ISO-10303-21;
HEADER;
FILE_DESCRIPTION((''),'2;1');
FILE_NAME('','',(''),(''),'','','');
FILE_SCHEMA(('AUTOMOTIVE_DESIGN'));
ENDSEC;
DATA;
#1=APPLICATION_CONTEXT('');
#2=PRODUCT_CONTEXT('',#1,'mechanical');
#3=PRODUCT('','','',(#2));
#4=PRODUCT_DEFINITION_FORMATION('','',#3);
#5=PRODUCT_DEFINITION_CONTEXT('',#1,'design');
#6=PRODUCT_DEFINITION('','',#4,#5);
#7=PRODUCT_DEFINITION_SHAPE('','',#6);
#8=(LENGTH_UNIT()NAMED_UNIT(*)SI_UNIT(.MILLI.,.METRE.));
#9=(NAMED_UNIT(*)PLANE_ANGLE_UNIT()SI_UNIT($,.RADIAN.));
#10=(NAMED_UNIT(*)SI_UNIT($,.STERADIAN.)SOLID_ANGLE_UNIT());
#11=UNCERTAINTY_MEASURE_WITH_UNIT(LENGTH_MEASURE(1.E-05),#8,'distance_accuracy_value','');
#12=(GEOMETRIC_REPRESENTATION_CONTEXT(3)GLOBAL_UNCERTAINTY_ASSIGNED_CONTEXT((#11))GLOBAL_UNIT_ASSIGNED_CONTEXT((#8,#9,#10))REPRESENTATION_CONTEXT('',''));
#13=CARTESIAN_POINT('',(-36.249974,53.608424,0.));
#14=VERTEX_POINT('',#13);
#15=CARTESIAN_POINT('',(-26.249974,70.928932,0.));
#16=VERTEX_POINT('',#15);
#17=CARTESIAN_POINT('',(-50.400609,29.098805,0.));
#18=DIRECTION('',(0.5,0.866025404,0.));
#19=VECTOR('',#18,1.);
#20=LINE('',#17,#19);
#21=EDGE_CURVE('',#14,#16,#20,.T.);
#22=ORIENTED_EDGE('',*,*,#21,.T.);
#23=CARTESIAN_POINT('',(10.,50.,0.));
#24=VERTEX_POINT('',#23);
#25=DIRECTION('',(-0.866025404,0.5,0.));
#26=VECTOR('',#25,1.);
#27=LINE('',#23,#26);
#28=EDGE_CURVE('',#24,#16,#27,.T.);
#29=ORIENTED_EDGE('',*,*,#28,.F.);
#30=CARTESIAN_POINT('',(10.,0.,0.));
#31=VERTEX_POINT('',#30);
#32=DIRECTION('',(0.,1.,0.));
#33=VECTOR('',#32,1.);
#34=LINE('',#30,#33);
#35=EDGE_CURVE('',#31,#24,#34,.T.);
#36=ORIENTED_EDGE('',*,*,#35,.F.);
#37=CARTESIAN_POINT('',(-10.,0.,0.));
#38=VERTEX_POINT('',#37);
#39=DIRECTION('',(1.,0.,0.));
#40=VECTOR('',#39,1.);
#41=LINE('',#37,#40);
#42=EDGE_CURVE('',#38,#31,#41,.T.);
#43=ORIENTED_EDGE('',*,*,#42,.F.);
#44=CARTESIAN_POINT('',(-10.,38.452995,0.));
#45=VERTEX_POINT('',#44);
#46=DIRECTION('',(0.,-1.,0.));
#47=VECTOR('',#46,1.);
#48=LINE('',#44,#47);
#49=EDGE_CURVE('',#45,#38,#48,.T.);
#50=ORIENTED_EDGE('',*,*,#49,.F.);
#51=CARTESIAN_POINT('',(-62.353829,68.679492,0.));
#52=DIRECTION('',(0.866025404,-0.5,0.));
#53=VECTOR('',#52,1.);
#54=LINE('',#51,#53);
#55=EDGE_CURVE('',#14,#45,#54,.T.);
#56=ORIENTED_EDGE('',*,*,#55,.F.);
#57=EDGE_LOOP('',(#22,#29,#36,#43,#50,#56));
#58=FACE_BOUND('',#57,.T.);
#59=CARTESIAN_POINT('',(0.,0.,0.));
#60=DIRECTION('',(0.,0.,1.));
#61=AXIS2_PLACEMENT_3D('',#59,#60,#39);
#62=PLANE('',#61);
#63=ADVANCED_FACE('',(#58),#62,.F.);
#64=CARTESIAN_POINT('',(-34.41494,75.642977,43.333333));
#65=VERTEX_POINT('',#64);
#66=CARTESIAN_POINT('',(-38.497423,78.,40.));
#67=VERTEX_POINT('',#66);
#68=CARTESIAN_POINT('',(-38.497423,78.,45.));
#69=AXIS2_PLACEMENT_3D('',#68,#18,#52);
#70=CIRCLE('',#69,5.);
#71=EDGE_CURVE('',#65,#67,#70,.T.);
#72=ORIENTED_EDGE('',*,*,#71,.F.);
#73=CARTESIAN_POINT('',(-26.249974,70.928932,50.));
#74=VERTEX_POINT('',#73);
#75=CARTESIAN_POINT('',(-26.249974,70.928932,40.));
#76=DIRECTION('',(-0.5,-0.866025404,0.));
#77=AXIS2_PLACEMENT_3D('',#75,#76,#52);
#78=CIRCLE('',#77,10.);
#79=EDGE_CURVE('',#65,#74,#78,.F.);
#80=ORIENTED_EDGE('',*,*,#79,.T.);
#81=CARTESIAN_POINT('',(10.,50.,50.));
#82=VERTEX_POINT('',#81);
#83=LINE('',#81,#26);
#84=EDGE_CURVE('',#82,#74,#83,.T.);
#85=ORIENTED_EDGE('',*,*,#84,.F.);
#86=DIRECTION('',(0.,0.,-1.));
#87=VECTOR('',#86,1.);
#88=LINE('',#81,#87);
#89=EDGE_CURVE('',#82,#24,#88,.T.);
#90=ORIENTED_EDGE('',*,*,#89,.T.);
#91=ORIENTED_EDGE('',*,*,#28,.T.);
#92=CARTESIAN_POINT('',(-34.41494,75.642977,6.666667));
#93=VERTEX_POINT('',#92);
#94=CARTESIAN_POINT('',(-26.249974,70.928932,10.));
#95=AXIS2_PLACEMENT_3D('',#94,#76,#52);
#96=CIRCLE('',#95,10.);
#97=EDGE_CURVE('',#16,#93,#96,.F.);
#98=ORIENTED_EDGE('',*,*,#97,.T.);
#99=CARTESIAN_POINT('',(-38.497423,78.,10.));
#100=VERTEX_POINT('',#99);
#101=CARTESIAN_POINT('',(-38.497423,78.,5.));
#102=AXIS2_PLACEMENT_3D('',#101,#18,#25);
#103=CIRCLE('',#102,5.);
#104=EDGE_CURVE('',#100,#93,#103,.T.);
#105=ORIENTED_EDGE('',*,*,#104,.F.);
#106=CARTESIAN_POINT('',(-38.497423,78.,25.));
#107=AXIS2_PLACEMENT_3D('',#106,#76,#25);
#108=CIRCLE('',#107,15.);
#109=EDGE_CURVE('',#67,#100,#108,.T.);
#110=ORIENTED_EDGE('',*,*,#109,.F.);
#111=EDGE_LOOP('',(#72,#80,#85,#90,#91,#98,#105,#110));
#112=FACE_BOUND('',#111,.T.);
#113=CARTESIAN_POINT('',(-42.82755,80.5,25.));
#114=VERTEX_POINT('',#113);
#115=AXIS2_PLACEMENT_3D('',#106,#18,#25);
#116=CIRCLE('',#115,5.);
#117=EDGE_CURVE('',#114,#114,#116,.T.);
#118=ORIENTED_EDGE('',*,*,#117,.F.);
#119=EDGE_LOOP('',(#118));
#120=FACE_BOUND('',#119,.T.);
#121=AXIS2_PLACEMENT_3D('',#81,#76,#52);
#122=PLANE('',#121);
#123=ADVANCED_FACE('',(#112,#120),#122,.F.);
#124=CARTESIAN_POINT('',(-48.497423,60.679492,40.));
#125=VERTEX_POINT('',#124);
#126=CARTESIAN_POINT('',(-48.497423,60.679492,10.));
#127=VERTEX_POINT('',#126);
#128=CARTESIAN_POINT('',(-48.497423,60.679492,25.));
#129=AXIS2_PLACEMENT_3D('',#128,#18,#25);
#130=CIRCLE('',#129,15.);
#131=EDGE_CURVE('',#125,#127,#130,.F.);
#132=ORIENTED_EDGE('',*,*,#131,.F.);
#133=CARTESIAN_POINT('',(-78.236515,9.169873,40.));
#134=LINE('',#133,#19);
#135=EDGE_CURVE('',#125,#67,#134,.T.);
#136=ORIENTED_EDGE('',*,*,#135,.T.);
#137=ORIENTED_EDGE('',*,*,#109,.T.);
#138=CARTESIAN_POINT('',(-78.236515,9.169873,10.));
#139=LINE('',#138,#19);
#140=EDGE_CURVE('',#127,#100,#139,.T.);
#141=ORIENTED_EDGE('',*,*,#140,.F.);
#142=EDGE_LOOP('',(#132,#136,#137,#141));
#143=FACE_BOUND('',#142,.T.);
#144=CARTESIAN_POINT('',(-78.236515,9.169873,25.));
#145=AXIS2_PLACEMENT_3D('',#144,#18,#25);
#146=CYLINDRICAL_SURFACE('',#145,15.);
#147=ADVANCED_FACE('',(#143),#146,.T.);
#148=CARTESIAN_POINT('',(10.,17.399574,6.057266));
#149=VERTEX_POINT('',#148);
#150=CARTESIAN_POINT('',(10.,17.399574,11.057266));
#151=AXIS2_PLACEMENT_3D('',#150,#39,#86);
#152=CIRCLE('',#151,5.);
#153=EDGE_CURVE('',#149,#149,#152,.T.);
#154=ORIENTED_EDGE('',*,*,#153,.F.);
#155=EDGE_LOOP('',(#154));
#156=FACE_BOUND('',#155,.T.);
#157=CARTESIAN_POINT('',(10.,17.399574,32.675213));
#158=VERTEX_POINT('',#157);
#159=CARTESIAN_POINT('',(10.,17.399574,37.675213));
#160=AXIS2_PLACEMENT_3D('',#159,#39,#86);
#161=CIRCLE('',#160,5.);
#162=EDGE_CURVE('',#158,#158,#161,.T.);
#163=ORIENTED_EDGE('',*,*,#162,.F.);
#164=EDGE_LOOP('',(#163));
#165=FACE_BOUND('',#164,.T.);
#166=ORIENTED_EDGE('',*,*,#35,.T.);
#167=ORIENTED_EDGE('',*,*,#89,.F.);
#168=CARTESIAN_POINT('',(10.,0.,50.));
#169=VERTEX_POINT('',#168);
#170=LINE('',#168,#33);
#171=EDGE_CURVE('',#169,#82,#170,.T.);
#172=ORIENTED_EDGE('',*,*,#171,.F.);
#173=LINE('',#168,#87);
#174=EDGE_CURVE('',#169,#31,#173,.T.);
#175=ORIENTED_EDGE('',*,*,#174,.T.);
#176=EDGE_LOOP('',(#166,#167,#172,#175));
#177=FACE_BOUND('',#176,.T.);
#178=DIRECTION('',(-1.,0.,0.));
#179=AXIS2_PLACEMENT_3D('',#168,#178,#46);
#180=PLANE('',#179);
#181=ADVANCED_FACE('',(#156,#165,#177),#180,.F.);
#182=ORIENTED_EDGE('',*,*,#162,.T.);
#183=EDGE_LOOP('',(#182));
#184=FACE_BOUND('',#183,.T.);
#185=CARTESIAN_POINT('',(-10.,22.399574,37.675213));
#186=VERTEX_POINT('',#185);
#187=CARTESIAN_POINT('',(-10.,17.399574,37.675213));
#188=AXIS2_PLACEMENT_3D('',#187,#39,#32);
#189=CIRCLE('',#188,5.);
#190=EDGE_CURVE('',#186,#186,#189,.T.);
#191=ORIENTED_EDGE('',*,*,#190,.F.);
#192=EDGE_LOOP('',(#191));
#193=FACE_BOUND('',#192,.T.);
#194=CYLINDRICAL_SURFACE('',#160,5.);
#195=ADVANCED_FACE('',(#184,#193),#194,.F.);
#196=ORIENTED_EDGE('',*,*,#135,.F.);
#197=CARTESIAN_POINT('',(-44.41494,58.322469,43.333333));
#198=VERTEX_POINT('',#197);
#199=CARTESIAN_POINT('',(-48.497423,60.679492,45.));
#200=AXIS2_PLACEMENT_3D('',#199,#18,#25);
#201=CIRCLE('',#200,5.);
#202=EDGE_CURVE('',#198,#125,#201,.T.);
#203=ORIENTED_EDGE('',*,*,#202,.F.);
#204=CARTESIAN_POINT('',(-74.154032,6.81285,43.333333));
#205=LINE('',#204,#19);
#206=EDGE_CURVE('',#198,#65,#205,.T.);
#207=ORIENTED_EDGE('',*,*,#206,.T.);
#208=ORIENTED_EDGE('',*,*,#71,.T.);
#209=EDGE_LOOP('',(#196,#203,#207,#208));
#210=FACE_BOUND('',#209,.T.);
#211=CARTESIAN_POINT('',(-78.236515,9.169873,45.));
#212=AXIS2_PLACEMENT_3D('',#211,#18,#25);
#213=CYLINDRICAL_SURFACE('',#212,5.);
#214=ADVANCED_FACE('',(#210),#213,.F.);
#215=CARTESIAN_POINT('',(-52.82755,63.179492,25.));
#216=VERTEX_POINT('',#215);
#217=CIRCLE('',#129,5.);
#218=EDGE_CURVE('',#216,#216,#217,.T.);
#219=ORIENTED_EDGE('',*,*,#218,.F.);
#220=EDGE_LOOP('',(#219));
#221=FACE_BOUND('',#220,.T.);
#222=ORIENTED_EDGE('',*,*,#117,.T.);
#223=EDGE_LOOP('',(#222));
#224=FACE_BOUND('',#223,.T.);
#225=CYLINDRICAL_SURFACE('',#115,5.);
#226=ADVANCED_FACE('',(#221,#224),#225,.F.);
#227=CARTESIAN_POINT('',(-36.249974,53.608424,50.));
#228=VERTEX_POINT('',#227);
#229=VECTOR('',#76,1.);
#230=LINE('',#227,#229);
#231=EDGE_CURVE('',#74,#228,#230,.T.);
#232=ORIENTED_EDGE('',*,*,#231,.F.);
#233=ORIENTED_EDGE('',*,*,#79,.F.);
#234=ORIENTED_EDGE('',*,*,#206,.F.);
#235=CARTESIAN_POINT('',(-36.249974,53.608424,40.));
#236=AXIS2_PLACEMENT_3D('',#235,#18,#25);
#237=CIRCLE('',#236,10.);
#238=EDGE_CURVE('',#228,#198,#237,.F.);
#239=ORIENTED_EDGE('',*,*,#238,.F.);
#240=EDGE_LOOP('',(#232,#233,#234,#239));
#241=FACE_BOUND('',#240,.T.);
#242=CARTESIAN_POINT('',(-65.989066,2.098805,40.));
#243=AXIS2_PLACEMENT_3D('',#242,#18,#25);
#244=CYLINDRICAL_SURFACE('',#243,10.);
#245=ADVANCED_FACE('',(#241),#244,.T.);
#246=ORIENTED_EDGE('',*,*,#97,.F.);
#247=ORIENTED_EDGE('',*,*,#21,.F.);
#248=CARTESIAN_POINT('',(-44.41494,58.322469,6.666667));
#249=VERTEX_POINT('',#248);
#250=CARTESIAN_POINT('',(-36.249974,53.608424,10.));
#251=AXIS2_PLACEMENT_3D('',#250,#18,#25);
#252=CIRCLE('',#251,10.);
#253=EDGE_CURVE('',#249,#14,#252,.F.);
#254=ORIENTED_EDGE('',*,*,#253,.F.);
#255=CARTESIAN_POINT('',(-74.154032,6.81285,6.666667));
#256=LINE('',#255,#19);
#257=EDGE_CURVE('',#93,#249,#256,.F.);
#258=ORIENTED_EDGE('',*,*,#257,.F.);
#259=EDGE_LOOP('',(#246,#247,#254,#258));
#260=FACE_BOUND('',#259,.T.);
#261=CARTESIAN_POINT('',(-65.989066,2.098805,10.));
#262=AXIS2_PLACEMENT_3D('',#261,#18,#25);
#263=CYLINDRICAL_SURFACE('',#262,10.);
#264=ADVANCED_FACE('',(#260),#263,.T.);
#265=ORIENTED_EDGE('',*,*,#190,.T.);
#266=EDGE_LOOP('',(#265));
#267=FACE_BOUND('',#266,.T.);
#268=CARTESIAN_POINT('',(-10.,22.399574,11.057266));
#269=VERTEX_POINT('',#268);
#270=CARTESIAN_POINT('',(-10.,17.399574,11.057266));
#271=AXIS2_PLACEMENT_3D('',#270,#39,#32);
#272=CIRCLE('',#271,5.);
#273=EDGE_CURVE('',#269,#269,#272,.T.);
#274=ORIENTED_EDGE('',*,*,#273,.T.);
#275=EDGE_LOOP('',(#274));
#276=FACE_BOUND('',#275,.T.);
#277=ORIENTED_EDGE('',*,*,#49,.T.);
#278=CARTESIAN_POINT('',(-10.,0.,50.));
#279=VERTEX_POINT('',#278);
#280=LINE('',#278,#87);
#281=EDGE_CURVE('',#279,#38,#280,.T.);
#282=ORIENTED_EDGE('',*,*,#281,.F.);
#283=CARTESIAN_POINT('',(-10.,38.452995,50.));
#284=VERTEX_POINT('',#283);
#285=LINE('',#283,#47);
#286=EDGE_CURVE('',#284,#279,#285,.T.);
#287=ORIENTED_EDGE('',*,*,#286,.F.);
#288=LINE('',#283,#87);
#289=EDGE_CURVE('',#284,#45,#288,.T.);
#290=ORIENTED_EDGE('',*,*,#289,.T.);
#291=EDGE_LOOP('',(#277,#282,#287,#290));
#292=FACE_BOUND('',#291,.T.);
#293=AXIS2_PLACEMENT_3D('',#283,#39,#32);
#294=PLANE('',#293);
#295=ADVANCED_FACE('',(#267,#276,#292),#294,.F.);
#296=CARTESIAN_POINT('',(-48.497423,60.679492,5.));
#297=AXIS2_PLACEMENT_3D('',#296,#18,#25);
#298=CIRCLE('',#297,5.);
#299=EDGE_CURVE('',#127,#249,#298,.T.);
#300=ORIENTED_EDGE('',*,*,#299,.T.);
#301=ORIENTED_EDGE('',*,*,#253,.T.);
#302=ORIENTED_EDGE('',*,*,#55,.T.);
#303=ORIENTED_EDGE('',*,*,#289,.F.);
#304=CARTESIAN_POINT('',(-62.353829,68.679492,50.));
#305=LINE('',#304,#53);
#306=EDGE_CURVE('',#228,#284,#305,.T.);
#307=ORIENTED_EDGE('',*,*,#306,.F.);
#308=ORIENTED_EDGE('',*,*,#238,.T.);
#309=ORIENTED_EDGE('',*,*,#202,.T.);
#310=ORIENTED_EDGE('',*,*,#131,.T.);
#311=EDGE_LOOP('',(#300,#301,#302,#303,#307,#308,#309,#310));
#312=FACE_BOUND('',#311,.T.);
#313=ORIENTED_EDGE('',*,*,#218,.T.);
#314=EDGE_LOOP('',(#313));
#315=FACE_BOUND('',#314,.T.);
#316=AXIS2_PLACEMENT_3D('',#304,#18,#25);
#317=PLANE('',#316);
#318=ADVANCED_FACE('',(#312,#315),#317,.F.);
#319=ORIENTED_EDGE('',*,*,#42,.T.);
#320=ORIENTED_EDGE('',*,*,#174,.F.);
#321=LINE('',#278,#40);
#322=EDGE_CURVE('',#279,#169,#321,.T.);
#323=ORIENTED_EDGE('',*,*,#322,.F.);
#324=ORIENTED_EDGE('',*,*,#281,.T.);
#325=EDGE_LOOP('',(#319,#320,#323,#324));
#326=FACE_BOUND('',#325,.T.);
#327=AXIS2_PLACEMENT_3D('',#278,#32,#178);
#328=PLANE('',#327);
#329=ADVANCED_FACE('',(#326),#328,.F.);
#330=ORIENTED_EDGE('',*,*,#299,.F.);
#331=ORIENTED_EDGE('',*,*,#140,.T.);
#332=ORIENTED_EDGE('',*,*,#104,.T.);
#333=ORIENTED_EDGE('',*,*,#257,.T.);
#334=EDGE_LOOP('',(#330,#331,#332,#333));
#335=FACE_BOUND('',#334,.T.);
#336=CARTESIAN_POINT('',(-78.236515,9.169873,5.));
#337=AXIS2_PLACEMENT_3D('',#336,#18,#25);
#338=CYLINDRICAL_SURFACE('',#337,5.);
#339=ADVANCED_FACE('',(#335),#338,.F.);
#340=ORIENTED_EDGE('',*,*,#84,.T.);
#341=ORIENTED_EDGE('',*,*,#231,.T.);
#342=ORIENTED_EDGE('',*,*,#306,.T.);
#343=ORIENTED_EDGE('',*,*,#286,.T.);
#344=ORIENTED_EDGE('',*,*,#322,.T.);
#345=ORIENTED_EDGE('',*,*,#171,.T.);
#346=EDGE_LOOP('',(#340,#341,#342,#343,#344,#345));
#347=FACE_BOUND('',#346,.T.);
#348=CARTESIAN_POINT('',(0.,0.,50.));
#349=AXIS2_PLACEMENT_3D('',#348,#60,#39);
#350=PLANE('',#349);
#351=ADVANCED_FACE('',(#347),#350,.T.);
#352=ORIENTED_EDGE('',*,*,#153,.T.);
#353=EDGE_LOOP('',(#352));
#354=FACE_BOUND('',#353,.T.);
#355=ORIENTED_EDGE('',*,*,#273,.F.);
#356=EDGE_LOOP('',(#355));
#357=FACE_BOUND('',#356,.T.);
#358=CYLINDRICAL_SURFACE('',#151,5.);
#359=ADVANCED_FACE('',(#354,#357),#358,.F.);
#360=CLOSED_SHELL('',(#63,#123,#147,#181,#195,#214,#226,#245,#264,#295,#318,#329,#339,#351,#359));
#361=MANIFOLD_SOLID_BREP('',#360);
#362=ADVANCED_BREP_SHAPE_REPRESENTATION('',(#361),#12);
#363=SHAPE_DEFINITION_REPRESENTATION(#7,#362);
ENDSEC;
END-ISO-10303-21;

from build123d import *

# Parameters (mm, degrees)
BOSS_EXTRUDE1_DEPTH = 50
CUT_EXTRUDE1_DEPTH  = 110.24284873619861
FILLET1_R           = 10
HOLE1_D             = 10
HOLE2_D             = 10


with BuildPart() as part:
    # Sketch1 → Boss-Extrude1 (new body)
    with BuildSketch(Plane.XY):
        Polygon((-10, 0), (10, 3.67e-15), (9.999999999999991, 50.00000000000001), (-52.35382907247969, 85.99999999999983), (-62.35382907247966, 68.67949192431102), (-10.000000000000009, 38.45299461620743), align=None)
    extrude(amount=BOSS_EXTRUDE1_DEPTH)

    # Sketch2 → Cut-Extrude1 (cut, through all)
    with BuildSketch(Plane(origin=(24.150635094610877, 41.83012701892233, 0), x_dir=(0.86602540378444, -0.4999999999999976, 0), z_dir=(0.4999999999999976, 0.86602540378444, 0))):
        with BuildLine():
            Line((-72.33974596215559, -50), (-88.33974596215548, -50))
            Line((-88.33974596215548, -50), (-88.33974596215548, 0))
            Line((-88.33974596215548, 0), (-72.33974596215559, -6.94e-15))
            ThreePointArc((-72.33974596215559, -6.94e-15), (-67.33974596215559, -5.000000000000008), (-72.33974596215559, -10.000000000000009))
            ThreePointArc((-72.33974596215559, -10.000000000000009), (-87.33974596215559, -25.000000000000007), (-72.33974596215559, -40.000000000000014))
            ThreePointArc((-72.33974596215559, -40.000000000000014), (-67.33974596215559, -45.000000000000014), (-72.33974596215559, -50))
        make_face()
    extrude(amount=-CUT_EXTRUDE1_DEPTH, mode=Mode.SUBTRACT)

    # Fillet1
    fillet1_edges = [part.edges().sort_by_distance(p)[0] for p in [
        (-43.49742261192873, 69.33974596215553, 7.47e-15),
        (-43.49742261192873, 69.33974596215553, 50),
    ]]
    fillet(fillet1_edges, radius=FILLET1_R - 0.0001)  # a hair under: the kernel refuses the full size

    # Hole1 (through all)
    with Locations(Plane(origin=(24.150635094610877, 41.83012701892233, 0), x_dir=(0.86602540378444, -0.4999999999999976, 0), z_dir=(0.4999999999999976, 0.86602540378444, 0))):
        with Locations((-72.339745962, -25)):
            Hole(HOLE1_D / 2)

    # Hole2 (through all)
    with Locations(Plane(origin=(10, 1.73e-15, 0), x_dir=(0, 0, -1), z_dir=(1, 1.7e-16, 0))):
        with Locations((-37.675212833, 17.399574334), (-11.057265884, 17.399574334)):
            Hole(HOLE2_D / 2)


solid = part.part
